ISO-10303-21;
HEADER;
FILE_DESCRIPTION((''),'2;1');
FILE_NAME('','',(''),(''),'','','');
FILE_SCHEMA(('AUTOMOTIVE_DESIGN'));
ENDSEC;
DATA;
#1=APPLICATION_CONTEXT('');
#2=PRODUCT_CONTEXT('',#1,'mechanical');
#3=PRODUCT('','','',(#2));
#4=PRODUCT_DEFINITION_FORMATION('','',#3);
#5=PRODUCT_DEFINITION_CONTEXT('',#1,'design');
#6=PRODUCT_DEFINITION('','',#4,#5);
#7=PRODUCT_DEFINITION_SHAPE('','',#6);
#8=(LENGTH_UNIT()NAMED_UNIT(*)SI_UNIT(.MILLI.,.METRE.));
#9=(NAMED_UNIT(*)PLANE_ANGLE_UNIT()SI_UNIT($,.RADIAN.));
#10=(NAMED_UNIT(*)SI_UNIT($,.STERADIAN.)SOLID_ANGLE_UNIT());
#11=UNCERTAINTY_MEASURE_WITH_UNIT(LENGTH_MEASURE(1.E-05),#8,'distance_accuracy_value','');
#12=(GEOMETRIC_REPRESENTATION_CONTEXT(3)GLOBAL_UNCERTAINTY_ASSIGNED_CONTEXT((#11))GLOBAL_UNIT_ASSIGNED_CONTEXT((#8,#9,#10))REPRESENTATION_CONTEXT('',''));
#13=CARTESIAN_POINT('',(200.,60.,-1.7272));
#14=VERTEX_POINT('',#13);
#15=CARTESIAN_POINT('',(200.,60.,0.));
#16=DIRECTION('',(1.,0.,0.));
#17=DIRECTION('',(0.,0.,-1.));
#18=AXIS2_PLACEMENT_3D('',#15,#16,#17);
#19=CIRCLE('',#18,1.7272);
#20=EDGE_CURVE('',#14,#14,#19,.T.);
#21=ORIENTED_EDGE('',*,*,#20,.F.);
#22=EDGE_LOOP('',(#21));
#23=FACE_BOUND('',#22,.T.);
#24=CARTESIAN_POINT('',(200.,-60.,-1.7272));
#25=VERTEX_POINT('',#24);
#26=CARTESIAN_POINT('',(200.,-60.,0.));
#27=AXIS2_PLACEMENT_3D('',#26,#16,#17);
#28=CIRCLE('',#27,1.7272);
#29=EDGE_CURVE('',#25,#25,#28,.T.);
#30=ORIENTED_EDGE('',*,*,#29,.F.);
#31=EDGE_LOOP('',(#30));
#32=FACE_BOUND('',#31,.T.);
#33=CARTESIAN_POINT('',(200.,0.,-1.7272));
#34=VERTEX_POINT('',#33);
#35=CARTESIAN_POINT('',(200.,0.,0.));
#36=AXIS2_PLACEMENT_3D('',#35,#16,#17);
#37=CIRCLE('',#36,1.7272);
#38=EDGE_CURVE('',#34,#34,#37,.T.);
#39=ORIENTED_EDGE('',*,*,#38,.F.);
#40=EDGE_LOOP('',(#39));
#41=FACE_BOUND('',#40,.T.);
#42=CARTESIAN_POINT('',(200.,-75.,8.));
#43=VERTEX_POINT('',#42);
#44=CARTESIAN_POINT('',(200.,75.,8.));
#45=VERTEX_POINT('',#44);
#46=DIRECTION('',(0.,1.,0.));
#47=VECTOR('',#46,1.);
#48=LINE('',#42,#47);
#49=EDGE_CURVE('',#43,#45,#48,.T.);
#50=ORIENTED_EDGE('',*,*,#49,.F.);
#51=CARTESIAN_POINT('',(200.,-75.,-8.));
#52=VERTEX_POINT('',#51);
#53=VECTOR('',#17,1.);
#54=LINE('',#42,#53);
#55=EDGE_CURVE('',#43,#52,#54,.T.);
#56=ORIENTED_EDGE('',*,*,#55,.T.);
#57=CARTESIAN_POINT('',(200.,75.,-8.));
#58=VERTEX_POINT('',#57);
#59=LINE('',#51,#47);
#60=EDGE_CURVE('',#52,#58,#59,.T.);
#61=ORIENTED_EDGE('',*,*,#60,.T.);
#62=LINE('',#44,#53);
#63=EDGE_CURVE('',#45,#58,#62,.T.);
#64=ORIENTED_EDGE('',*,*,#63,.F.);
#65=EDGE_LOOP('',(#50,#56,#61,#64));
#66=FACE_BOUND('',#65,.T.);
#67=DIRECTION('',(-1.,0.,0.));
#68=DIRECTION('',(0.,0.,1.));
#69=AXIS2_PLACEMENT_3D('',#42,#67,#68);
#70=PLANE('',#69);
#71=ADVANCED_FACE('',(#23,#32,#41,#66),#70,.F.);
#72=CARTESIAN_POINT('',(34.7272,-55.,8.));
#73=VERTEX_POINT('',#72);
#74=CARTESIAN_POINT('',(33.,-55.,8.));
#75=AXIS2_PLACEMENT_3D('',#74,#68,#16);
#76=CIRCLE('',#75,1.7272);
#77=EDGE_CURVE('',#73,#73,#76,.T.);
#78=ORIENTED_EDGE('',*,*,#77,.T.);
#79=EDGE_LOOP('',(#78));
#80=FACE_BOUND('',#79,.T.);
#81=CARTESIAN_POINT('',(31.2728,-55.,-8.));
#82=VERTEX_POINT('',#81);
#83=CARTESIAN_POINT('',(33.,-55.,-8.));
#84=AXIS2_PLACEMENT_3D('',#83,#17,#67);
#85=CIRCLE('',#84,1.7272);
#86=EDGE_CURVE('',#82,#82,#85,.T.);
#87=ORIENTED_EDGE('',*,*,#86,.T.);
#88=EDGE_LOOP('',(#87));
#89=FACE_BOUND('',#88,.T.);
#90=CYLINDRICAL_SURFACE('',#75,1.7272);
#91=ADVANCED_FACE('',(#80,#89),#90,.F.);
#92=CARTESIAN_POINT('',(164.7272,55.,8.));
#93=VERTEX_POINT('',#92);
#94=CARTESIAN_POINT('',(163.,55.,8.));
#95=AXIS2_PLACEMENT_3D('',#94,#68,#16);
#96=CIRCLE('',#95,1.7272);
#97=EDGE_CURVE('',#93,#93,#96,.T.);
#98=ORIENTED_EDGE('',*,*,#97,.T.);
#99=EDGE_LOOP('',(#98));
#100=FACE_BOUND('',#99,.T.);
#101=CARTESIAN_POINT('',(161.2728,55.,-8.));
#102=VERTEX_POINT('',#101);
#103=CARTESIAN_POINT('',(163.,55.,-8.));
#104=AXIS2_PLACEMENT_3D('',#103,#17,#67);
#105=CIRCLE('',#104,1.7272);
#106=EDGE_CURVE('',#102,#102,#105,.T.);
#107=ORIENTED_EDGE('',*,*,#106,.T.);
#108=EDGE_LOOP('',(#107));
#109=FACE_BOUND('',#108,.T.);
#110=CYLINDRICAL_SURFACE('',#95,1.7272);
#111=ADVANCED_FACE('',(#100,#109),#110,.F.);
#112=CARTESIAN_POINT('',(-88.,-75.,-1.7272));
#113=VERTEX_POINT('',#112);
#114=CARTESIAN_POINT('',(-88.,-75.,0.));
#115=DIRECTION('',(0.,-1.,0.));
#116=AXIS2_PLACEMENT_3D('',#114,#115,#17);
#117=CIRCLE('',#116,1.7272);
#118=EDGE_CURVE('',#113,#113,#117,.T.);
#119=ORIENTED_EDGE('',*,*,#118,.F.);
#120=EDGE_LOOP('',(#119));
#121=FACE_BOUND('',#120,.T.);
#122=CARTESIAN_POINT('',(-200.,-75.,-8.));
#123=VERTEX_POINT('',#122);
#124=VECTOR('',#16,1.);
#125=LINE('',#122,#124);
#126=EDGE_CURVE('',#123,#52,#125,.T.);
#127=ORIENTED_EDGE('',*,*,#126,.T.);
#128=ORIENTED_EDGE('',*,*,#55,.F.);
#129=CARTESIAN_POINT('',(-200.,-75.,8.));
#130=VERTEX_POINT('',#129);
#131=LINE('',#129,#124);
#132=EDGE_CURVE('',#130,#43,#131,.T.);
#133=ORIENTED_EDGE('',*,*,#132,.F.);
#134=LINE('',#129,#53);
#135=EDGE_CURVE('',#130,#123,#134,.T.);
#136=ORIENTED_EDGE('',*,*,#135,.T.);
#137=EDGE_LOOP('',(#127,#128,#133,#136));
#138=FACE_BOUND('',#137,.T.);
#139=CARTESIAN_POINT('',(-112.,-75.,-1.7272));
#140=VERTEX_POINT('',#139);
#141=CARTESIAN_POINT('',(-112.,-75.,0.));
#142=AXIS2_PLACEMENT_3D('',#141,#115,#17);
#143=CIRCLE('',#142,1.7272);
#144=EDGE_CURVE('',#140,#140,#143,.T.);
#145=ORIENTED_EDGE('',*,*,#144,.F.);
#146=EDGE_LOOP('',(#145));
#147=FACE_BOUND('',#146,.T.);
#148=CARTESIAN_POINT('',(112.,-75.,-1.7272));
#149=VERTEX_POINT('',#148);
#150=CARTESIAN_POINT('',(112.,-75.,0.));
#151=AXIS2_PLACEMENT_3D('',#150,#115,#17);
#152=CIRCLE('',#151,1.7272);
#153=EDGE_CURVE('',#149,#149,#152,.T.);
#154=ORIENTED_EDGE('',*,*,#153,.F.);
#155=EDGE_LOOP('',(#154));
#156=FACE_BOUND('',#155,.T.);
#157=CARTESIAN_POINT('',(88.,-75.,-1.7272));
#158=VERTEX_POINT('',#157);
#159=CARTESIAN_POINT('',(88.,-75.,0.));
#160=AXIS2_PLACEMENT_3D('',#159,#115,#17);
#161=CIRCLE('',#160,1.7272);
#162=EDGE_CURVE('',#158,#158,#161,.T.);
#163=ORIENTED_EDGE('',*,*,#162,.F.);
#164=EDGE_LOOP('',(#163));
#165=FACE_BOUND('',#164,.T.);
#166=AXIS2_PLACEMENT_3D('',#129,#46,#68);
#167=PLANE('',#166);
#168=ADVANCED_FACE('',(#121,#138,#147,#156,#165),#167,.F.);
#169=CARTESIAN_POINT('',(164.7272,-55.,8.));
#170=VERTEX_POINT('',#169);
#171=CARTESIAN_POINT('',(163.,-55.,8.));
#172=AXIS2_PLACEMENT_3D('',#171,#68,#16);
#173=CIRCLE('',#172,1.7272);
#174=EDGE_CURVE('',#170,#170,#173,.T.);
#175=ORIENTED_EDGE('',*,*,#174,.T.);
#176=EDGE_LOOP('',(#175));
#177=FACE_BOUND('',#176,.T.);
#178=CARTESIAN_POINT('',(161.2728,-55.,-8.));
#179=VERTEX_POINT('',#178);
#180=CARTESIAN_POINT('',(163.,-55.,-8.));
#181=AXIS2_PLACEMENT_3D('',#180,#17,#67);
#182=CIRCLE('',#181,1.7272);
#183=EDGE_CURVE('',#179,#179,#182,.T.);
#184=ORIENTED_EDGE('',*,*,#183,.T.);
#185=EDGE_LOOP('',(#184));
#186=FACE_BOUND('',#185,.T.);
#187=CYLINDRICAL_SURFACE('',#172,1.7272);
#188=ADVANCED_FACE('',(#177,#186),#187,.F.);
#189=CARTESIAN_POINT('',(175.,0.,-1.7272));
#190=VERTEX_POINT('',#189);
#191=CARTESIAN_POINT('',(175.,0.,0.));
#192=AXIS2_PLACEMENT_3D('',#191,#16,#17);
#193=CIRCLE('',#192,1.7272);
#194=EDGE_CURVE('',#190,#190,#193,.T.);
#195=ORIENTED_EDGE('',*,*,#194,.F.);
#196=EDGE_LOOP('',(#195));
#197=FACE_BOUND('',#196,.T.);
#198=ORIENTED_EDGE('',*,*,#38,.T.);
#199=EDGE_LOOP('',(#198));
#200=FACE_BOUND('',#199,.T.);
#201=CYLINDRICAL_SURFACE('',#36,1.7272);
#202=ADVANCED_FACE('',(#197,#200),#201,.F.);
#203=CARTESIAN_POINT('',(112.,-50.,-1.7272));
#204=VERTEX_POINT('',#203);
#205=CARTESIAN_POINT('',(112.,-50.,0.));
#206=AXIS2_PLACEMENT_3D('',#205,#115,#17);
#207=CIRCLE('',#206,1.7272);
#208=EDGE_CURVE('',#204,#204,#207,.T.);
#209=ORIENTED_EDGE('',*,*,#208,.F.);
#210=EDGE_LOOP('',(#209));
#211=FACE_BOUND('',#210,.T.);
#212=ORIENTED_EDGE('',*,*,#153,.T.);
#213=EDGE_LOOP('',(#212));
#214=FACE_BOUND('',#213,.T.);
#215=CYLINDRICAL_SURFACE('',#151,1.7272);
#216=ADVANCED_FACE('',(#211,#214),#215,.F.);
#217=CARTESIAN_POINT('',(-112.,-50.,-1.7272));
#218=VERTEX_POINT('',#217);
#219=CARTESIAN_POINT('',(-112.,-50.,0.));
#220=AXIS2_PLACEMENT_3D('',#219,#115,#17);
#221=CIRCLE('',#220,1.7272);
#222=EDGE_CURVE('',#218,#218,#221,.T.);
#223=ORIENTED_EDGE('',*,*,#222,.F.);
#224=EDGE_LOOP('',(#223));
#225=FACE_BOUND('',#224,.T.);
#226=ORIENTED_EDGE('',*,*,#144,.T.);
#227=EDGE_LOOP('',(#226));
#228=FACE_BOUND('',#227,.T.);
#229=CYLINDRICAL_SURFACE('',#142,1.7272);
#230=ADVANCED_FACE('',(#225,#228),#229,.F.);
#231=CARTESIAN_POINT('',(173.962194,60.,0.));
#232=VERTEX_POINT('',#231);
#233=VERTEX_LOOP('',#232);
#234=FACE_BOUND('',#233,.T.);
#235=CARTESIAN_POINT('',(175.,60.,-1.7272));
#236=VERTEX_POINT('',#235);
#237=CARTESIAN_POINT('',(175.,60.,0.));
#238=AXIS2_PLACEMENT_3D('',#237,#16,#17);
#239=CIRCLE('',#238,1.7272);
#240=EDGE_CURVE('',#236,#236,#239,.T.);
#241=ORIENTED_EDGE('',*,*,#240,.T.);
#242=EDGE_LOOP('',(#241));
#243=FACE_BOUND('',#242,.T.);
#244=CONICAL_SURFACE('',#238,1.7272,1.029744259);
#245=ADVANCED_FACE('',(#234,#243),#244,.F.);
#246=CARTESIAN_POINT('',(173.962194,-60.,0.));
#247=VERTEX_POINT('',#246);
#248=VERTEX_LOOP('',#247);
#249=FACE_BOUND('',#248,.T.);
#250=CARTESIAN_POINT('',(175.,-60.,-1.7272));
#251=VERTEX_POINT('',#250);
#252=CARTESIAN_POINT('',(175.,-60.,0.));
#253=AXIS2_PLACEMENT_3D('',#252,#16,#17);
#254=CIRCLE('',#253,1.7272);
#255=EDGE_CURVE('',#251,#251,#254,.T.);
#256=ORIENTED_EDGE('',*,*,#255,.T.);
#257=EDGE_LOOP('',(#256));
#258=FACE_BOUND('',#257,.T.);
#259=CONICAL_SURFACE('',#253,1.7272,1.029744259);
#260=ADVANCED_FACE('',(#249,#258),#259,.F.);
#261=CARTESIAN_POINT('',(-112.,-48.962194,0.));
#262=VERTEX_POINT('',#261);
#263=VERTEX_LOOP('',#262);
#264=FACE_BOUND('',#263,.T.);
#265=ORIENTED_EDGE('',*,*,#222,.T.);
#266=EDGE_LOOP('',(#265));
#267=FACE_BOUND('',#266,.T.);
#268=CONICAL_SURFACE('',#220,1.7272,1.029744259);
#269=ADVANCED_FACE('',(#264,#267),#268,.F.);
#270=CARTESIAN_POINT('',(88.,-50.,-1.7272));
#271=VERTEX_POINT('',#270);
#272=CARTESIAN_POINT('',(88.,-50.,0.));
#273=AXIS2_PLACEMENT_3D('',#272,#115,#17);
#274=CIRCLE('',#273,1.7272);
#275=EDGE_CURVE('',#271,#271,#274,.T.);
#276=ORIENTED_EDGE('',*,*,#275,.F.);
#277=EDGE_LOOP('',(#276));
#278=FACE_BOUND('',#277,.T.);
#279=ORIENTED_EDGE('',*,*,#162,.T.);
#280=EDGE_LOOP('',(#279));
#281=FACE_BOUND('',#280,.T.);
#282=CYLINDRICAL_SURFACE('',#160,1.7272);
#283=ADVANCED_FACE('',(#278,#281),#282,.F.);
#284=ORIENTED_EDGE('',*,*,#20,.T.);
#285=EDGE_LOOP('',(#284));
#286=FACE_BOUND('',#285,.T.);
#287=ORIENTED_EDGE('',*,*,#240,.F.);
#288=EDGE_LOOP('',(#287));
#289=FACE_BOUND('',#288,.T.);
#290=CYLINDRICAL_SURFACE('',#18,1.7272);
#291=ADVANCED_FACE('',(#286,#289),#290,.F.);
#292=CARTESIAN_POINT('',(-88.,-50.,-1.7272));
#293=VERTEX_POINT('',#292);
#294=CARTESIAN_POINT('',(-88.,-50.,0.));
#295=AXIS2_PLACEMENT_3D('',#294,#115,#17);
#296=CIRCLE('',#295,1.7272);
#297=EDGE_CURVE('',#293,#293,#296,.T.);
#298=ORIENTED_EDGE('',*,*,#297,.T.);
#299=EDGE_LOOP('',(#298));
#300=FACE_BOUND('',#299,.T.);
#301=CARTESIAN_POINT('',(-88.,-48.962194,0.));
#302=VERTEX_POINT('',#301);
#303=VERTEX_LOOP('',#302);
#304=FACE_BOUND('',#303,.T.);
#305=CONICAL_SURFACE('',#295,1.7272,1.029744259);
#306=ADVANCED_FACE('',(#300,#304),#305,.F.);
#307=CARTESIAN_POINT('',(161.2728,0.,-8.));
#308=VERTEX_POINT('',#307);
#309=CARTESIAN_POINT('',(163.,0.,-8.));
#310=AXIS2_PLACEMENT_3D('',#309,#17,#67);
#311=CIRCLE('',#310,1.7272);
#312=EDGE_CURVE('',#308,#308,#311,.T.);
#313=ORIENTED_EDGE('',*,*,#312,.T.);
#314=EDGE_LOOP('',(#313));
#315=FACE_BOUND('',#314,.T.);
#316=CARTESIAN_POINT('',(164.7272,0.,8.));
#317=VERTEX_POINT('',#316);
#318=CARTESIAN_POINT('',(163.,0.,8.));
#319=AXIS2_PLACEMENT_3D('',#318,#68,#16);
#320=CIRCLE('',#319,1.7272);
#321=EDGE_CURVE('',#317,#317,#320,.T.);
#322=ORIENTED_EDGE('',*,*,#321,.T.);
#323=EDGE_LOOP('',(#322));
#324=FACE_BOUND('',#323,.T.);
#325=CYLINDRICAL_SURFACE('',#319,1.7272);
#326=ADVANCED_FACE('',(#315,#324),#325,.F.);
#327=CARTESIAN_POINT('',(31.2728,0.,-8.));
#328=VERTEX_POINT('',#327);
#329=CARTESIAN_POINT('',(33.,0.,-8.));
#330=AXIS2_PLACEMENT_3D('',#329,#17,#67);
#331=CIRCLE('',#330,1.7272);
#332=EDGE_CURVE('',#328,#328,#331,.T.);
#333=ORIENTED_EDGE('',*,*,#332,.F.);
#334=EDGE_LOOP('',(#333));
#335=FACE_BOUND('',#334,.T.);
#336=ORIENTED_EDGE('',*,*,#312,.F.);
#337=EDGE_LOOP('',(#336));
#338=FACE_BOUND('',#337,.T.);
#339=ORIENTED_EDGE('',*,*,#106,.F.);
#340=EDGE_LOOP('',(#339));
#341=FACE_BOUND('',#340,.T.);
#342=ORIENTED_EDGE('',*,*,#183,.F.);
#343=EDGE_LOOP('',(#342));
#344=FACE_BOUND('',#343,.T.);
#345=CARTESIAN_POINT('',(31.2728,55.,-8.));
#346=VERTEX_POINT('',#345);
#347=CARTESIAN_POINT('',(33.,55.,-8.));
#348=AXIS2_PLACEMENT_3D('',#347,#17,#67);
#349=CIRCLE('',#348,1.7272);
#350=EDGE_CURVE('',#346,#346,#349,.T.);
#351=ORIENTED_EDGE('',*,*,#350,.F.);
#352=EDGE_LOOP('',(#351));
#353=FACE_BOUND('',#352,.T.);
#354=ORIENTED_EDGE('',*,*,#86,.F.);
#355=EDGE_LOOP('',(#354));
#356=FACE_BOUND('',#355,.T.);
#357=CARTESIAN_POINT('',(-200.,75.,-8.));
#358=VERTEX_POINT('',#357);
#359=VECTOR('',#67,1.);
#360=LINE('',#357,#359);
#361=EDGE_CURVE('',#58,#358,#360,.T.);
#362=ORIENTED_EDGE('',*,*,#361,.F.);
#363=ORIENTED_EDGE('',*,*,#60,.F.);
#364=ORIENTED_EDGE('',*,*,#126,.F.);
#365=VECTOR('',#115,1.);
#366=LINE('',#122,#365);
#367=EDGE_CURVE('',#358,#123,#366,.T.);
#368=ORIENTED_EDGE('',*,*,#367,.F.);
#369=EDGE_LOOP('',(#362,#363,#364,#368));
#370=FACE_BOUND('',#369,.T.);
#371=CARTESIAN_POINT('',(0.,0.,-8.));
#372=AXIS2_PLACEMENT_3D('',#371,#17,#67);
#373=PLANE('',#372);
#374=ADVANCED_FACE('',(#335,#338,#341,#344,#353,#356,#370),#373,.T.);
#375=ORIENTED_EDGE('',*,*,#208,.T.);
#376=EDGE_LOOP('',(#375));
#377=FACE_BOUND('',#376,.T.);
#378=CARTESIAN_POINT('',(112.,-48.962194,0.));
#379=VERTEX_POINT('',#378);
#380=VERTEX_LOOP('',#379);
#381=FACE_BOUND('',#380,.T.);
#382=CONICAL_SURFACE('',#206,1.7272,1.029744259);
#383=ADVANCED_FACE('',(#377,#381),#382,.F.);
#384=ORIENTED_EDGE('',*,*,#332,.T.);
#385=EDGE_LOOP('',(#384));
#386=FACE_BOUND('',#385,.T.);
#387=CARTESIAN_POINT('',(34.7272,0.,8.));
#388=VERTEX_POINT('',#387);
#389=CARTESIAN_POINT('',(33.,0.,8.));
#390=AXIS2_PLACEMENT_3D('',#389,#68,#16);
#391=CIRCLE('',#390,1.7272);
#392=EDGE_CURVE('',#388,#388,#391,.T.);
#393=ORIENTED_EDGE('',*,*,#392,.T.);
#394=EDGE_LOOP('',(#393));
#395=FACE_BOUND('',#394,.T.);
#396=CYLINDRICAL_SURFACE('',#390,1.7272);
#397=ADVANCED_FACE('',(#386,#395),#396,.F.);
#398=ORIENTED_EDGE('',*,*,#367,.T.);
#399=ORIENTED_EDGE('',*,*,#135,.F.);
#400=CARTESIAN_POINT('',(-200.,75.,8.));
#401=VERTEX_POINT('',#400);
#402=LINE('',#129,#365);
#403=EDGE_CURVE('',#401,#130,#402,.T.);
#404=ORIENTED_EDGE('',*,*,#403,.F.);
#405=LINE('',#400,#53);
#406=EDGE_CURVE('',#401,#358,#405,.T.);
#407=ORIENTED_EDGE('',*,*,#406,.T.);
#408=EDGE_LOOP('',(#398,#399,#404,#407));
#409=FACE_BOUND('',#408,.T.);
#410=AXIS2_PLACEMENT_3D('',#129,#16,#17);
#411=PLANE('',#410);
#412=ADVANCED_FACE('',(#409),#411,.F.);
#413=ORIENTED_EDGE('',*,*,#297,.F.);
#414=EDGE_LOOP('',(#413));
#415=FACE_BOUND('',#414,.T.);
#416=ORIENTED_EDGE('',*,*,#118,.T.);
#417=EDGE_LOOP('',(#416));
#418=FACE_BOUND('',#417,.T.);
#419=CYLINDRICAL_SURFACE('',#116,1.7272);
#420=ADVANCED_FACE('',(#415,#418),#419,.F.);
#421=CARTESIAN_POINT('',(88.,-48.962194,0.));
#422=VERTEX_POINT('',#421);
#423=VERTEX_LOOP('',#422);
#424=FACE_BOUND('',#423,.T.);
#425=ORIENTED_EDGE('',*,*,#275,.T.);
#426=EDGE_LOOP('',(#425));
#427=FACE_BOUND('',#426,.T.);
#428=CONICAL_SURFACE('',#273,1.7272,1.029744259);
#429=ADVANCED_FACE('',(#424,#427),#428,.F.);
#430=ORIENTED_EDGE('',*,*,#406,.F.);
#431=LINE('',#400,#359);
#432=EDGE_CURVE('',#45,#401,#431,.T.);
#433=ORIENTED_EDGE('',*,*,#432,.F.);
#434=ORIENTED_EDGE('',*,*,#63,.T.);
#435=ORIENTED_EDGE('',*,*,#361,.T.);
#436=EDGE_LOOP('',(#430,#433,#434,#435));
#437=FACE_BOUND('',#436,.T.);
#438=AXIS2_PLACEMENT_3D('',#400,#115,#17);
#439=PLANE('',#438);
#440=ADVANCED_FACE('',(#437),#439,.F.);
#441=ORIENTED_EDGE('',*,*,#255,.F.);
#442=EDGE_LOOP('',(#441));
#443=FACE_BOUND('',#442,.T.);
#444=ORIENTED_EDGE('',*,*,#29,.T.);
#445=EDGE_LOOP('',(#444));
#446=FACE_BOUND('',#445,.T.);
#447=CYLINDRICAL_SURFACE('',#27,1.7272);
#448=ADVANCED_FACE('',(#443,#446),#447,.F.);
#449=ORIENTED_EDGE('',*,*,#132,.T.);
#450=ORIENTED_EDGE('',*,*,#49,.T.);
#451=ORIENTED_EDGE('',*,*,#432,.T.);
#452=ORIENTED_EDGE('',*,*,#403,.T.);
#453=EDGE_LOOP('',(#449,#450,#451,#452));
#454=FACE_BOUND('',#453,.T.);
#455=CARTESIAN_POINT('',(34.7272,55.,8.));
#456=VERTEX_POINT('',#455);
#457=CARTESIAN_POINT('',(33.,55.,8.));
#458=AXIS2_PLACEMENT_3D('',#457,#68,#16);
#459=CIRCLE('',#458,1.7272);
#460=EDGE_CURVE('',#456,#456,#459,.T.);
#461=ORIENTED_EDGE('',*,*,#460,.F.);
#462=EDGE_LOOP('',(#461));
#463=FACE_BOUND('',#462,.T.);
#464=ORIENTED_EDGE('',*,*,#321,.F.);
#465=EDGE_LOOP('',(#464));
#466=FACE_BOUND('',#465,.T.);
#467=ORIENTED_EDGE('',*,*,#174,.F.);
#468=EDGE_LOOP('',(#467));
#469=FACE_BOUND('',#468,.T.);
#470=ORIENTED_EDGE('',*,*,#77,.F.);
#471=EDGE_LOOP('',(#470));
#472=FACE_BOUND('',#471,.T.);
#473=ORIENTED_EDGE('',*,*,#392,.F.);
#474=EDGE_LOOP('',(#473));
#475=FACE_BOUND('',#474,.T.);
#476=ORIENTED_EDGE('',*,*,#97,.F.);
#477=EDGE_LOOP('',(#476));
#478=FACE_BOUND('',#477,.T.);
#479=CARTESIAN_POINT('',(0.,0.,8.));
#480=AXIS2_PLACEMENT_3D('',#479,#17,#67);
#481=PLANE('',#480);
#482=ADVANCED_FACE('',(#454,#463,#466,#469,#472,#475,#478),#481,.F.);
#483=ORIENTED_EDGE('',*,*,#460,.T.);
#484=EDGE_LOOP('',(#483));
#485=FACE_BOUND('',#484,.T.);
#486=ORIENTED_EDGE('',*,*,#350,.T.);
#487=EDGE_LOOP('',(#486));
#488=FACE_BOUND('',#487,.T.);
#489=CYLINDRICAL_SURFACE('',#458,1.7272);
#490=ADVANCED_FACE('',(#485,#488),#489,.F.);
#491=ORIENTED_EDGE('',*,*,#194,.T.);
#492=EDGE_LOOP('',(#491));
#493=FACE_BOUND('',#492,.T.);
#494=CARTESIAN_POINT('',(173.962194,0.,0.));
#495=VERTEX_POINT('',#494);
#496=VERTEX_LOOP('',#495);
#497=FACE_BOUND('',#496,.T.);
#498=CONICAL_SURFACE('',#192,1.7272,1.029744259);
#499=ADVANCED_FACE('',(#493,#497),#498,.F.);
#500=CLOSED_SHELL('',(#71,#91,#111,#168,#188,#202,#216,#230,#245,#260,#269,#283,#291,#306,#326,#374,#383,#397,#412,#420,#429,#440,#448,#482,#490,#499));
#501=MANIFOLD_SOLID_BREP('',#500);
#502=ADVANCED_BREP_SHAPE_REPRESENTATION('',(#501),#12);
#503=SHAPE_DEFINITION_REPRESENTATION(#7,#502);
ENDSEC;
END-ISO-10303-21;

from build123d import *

# Parameters (mm, degrees)
SKETCH1_W                      = 400
SKETCH1_H                      = 150
BOSS_EXTRUDE1_DEPTH            = 8
F_8_36_START                   = -8
F_8_36_TAPPED_HOLE1_OUTLINE_R  = 1.7272
F_8_36_TAPPED_HOLE1_DEPTH      = 16
F_8_36_TAPPED_HOLE2_D          = 3.4544
F_8_36_TAPPED_HOLE2_DEPTH      = 25
F_8_36_TAPPED_HOLE2_TIP        = 1.037806461
F_8_36_TAPPED_HOLE3_AT_2_COUNT = 2
F_8_36_TAPPED_HOLE3_AT_2_PITCH = 24
LPATTERN1_COUNT                = 2
LPATTERN1_PITCH                = 200


# Read off the part's stored shape, not the designer's step: #8-36 Tapped Hole1
with BuildPart() as part:
    # Sketch1 → Boss-Extrude1 (new, symmetric)
    with BuildSketch(Plane.XY):
        Rectangle(SKETCH1_W, SKETCH1_H)
    extrude(amount=BOSS_EXTRUDE1_DEPTH, both=True)

    # #8-36 Tapped Hole1 outline → #8-36 Tapped Hole1 (cut)
    with BuildSketch(Plane.XY.offset(F_8_36_START)):
        with Locations((33, 0)):
            Circle(F_8_36_TAPPED_HOLE1_OUTLINE_R)
        with Locations((163, 0)):
            Circle(F_8_36_TAPPED_HOLE1_OUTLINE_R)
        with Locations((163, -55)):
            Circle(F_8_36_TAPPED_HOLE1_OUTLINE_R)
        with Locations((33, 55)):
            Circle(F_8_36_TAPPED_HOLE1_OUTLINE_R)
        with Locations((163, 55)):
            Circle(F_8_36_TAPPED_HOLE1_OUTLINE_R)
        with Locations((33, -55)):
            Circle(F_8_36_TAPPED_HOLE1_OUTLINE_R)
    extrude(amount=F_8_36_TAPPED_HOLE1_DEPTH, mode=Mode.SUBTRACT)

    # #8-36 Tapped Hole2
    with Locations(Plane(origin=(200, -75, -313), x_dir=(0, 0, -1), z_dir=(1, 0, 0))):
        with Locations((-313, 135), (-313, 75), (-313, 15)):
            Hole(F_8_36_TAPPED_HOLE2_D / 2, depth=F_8_36_TAPPED_HOLE2_DEPTH)
            with Locations((0, 0, -(F_8_36_TAPPED_HOLE2_DEPTH + F_8_36_TAPPED_HOLE2_TIP / 2))):  # 118° drill point
                Cone(0, F_8_36_TAPPED_HOLE2_D / 2, F_8_36_TAPPED_HOLE2_TIP, mode=Mode.SUBTRACT)

    # Sketch7 → #8-36 Tapped Hole3 (revolve, cut)
    with BuildSketch(Plane(origin=(-88, -75, 0), x_dir=(0, 0, -1), z_dir=(1, 0, 0))):
        Polygon((0, 0), (0, 26.037806461), (1.7272, 25), (1.7272, 0), align=None)
    f_8_36_tapped_hole3 = revolve(axis=Axis((-88, -81.35, 0), (0, 1, 0)), mode=Mode.SUBTRACT)

    # #8-36 Tapped Hole3 at 2: #8-36 Tapped Hole3 ×2
    with Locations(*[(-i * F_8_36_TAPPED_HOLE3_AT_2_PITCH, 0, 0) for i in range(1, F_8_36_TAPPED_HOLE3_AT_2_COUNT)]):
        add(f_8_36_tapped_hole3, mode=Mode.SUBTRACT)

    # LPattern1: #8-36 Tapped Hole3 ×2
    with Locations(*[(i * LPATTERN1_PITCH, 0, 0) for i in range(1, LPATTERN1_COUNT)]):
        add(f_8_36_tapped_hole3, mode=Mode.SUBTRACT)

    # LPattern1 copy 1 sketch → LPattern1 copy 1 (revolve, cut)
    with BuildSketch(Plane(origin=(88, -75, 0), x_dir=(0, 0, -1), z_dir=(1, 0, 0))):
        Polygon((0, 0), (0, 26.037806461), (1.7272, 25), (1.7272, 0), align=None)
    revolve(axis=Axis((88, -81.35, 0), (0, 1, 0)), mode=Mode.SUBTRACT)


solid = part.part
